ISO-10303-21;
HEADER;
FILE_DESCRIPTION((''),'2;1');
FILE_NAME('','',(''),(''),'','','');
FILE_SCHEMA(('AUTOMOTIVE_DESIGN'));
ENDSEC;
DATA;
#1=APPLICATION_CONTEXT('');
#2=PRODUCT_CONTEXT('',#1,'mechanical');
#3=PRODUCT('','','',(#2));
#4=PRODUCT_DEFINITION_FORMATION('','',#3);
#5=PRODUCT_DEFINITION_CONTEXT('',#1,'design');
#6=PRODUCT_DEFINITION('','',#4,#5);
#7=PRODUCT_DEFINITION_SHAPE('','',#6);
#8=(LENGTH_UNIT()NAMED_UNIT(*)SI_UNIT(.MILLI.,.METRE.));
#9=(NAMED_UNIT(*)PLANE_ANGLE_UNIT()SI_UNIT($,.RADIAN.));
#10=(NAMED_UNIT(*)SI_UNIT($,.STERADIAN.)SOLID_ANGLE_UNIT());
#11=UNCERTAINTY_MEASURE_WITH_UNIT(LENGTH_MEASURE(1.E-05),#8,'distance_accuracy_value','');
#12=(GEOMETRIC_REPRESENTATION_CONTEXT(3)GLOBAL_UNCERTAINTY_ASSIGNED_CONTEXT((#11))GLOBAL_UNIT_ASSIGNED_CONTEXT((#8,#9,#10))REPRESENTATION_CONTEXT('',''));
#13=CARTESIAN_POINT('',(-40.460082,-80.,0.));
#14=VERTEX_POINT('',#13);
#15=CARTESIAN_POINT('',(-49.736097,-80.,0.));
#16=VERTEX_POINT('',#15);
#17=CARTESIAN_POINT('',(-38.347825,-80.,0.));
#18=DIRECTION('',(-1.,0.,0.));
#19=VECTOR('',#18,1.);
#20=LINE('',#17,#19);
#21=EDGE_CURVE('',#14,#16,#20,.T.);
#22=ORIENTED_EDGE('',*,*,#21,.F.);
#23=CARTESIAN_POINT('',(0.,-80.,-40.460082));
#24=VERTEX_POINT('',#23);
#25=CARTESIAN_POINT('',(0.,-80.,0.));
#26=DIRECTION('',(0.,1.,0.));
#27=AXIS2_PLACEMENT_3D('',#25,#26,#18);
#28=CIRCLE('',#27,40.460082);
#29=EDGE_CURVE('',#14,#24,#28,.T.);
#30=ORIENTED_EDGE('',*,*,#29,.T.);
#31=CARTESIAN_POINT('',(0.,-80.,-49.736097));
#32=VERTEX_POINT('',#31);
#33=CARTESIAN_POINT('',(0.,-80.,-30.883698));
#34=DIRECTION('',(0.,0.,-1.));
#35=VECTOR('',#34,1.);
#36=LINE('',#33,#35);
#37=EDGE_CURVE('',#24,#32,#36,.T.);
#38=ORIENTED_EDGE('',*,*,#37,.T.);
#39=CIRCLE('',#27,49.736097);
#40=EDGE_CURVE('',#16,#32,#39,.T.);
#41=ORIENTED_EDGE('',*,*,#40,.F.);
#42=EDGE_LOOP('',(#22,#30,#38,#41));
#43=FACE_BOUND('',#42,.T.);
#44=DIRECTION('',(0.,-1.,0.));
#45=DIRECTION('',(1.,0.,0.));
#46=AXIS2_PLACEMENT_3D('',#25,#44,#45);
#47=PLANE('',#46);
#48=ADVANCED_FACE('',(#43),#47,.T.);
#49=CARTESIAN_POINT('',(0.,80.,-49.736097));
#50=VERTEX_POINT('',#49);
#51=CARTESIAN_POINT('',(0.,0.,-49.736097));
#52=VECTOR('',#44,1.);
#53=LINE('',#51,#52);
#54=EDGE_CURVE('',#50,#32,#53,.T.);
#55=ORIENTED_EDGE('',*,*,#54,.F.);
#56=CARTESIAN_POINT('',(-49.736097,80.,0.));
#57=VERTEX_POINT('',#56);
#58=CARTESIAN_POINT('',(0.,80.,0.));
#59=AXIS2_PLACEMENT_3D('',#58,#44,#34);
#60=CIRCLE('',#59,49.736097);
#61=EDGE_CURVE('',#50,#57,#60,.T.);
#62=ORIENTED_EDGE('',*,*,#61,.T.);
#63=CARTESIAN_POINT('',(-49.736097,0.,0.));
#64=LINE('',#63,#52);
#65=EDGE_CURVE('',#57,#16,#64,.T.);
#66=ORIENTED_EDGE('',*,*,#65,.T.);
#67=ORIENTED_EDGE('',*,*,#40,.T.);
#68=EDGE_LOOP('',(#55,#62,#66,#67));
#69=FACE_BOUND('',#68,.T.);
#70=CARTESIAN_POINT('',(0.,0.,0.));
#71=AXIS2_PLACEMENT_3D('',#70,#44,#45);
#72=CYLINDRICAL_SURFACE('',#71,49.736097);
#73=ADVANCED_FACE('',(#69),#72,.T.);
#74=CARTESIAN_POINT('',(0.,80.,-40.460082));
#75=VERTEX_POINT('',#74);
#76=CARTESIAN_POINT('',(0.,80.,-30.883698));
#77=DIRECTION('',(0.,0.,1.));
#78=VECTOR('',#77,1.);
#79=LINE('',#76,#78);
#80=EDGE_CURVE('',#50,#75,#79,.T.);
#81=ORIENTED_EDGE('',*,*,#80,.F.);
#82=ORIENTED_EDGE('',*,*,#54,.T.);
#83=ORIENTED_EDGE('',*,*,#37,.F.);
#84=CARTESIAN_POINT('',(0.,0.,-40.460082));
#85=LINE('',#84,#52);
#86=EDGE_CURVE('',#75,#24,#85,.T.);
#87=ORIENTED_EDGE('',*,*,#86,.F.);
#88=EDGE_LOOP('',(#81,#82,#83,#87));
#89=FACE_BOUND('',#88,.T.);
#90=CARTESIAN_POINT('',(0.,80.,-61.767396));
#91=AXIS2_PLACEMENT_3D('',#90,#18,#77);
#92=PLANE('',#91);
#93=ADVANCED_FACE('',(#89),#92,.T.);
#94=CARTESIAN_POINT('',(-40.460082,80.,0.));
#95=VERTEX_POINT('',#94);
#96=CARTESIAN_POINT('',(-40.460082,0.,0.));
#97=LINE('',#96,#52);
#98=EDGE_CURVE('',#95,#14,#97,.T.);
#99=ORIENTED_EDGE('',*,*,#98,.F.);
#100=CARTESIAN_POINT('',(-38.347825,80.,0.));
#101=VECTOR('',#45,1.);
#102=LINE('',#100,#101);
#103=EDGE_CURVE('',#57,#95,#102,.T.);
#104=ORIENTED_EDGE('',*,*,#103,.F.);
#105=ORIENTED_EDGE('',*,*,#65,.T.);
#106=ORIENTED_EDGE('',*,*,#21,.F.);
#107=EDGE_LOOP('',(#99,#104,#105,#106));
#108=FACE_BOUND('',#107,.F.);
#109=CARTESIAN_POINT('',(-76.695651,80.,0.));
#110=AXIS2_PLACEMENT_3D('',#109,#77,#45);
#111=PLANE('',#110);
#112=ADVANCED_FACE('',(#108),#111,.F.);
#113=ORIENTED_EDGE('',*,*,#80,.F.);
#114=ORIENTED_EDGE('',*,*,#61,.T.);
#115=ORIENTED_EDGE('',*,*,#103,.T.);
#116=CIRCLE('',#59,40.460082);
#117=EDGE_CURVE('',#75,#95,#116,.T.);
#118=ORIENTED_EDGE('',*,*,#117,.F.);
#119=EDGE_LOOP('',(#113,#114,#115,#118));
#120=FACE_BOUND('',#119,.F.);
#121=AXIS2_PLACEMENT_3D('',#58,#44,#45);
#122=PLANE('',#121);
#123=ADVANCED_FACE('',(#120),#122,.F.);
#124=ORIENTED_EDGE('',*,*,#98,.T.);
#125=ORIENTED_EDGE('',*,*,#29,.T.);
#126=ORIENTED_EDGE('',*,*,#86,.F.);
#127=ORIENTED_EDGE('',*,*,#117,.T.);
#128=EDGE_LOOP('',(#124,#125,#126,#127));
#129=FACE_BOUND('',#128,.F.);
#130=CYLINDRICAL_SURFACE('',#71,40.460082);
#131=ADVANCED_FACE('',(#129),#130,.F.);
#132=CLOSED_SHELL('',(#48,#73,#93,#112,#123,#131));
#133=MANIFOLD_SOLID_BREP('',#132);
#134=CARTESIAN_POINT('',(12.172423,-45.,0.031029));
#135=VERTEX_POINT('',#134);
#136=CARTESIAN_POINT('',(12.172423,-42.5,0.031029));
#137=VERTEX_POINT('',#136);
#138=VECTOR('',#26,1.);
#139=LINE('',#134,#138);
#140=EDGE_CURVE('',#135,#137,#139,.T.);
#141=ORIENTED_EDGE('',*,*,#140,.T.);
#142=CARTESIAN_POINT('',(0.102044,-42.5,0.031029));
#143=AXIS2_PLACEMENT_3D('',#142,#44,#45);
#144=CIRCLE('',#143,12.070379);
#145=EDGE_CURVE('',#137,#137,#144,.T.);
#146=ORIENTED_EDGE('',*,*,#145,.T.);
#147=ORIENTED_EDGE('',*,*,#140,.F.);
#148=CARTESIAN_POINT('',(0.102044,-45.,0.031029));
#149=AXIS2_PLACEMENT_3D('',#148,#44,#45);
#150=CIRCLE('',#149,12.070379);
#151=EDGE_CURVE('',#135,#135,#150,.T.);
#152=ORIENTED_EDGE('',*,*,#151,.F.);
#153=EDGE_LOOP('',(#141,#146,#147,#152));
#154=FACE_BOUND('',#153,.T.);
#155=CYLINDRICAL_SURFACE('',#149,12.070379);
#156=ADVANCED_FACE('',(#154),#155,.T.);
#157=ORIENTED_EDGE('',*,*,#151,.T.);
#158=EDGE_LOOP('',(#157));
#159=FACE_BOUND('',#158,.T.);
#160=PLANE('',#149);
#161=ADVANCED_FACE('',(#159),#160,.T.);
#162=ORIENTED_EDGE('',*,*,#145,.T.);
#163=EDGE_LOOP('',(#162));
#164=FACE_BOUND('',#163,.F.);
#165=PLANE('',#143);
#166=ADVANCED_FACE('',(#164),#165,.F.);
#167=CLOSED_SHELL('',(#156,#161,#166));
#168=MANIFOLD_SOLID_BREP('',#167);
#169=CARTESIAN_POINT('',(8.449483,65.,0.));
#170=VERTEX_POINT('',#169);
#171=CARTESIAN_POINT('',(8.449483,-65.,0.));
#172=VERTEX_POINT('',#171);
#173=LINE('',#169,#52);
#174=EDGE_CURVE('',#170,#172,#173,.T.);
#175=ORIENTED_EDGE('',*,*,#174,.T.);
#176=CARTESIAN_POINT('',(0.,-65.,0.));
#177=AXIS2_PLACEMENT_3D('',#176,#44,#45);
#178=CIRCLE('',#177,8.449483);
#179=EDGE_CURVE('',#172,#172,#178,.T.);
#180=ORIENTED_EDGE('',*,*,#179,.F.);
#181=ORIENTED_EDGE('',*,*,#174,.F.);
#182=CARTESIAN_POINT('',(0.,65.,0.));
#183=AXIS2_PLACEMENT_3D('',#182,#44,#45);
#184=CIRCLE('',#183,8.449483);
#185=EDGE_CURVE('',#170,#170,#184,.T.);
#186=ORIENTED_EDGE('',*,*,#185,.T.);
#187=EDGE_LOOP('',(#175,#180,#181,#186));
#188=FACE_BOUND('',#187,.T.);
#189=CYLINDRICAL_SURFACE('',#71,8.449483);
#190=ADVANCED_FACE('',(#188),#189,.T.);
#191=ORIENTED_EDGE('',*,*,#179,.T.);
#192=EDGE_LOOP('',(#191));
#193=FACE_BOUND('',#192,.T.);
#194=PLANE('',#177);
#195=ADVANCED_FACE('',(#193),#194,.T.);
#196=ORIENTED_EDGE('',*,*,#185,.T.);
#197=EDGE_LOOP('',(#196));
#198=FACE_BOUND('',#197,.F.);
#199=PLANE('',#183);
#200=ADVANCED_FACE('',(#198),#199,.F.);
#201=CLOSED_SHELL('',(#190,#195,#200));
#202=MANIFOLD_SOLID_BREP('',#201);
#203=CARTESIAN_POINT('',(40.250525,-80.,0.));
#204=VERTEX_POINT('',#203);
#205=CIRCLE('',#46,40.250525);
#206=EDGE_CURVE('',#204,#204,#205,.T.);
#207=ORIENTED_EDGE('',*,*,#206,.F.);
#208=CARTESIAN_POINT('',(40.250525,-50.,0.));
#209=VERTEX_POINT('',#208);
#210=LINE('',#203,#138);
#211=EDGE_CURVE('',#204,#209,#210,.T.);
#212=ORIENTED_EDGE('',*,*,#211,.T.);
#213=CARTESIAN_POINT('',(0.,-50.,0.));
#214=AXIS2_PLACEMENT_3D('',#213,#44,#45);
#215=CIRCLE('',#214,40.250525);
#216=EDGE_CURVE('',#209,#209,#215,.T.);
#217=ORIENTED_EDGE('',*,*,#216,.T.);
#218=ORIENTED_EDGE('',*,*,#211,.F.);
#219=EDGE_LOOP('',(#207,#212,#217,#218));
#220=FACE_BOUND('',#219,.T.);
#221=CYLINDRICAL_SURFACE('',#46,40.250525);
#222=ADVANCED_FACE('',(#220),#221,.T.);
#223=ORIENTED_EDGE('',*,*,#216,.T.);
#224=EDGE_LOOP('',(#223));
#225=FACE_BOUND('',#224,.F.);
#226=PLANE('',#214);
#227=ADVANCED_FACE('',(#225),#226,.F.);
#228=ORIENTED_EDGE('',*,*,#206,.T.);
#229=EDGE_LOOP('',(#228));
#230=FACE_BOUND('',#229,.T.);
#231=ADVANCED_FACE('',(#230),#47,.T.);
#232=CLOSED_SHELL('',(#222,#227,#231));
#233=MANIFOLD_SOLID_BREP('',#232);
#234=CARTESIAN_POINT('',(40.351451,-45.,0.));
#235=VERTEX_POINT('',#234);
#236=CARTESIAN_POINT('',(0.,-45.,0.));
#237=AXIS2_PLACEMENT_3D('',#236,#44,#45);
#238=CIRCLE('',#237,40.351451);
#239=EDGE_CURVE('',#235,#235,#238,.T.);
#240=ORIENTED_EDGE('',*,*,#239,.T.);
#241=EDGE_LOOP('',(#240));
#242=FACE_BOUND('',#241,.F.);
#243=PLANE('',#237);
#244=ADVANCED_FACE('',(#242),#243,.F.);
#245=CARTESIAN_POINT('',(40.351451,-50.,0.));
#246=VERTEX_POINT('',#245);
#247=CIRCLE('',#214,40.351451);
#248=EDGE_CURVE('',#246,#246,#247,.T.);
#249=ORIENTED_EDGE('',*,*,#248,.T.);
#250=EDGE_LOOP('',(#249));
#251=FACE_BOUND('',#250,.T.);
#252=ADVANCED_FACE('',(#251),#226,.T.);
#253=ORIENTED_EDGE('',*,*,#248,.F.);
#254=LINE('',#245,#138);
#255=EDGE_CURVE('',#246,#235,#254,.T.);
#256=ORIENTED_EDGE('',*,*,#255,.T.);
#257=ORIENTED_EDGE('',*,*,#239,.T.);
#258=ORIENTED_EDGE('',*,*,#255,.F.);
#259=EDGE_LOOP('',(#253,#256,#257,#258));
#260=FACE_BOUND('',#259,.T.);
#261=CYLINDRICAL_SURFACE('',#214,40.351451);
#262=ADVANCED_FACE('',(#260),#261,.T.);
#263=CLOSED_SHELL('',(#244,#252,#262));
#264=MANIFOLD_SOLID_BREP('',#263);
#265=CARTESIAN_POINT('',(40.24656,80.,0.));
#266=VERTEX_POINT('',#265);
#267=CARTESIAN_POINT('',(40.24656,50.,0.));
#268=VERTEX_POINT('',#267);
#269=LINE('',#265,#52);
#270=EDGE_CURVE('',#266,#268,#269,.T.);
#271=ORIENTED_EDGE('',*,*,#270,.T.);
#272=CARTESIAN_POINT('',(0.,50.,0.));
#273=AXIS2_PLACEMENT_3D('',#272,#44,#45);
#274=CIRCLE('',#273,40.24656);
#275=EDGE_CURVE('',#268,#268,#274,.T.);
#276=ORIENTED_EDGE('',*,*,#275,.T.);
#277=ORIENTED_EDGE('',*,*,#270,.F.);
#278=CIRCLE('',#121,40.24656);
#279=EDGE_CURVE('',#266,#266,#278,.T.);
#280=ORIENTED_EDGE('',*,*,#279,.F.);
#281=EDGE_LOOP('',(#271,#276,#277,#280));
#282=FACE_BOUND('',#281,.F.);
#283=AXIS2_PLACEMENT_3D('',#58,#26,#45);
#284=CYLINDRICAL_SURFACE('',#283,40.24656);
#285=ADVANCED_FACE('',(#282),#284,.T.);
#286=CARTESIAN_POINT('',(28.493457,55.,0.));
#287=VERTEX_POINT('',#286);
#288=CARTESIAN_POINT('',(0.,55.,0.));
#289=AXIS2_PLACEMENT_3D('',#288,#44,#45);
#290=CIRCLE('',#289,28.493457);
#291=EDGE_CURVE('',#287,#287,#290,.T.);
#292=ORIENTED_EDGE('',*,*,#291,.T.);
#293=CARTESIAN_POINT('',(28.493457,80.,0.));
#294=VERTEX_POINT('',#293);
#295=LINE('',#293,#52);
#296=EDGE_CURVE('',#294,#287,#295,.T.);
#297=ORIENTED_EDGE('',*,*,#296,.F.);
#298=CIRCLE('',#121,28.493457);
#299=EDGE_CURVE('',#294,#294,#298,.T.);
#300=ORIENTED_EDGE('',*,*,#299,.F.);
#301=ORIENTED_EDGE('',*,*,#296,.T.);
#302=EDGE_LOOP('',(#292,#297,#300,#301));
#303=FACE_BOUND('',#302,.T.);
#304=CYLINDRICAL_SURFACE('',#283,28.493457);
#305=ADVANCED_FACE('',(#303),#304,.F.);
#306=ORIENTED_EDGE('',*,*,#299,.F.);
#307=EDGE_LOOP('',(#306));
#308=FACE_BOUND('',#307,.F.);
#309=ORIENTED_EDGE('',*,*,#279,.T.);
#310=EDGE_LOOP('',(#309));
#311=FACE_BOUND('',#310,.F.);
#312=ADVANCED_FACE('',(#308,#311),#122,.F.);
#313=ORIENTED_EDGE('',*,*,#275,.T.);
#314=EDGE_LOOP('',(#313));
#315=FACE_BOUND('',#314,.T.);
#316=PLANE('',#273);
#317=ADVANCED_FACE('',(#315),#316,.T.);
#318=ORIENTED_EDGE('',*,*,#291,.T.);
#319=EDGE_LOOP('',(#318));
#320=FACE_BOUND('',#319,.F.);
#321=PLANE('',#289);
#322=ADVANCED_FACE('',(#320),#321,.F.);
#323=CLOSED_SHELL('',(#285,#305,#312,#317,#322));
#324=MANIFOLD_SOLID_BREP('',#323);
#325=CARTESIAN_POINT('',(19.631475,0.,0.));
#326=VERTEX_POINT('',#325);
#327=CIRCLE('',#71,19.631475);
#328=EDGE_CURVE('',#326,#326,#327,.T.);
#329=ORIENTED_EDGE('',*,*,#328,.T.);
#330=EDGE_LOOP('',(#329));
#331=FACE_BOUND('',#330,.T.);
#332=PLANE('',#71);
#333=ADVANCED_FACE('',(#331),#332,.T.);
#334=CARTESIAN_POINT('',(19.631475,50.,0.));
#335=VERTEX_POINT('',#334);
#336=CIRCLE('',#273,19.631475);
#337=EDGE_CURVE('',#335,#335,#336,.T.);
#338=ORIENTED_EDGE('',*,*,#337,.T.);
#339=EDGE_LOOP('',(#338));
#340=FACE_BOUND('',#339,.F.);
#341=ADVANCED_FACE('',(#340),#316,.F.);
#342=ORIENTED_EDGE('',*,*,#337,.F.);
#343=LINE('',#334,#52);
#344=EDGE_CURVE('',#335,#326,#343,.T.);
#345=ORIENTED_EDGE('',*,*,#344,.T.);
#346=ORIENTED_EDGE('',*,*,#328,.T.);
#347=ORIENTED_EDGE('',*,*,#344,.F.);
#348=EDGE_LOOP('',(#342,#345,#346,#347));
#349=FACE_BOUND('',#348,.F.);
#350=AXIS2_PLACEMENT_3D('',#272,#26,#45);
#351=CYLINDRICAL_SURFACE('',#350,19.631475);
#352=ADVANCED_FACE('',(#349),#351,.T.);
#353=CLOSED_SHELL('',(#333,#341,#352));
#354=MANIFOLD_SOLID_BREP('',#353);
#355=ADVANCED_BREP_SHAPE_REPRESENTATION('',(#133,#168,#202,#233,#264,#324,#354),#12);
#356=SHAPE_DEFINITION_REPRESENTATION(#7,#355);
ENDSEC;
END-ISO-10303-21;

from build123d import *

# Parameters (mm, degrees)
F0_R      = 49.7360969104
F1_DEPTH  = 80
F2_R      = 40.4600824773
F3_DEPTH  = 90
F4_R      = 8.4494830611
F5_DEPTH  = 65
F7_R      = 40.2505245535
F8_DEPTH  = 30
F10_R     = 40.3514508638
F11_DEPTH = 5
F13_R     = 40.2465604933
F14_DEPTH = 30
F16_R     = 19.6314751685
F17_DEPTH = 50
F18_R     = 28.4934569002
F19_DEPTH = 25
F20_W     = 76.695650816
F20_H     = 61.7673955858
F21_DEPTH = 180
F23_R     = 12.0703792792
F24_DEPTH = 2.5


with BuildPart() as f1:
    # F0 (on Front) → F1 (new body, symmetric)
    with BuildSketch(Plane.XZ):
        Circle(F0_R)
    extrude(amount=F1_DEPTH, both=True)

    # F2 (on Front) → F3 (cut, symmetric)
    with BuildSketch(Plane.XZ):
        Circle(F2_R)
    extrude(amount=F3_DEPTH, both=True, mode=Mode.SUBTRACT)

    # F20 (on offset) → F21 (cut)
    with BuildSketch(Plane.XZ.offset(-80)):
        with Locations((-38.347825408, -30.8836977929)):
            Rectangle(F20_W, F20_H)
    extrude(amount=F21_DEPTH, mode=Mode.SUBTRACT)


with BuildPart() as f5:
    # F4 (on Front) → F5 (new body, symmetric)
    with BuildSketch(Plane.XZ):
        Circle(F4_R)
    extrude(amount=F5_DEPTH, both=True)


with BuildPart() as f8:
    # F7 (on offset) → F8 (new body)
    with BuildSketch(Plane.XZ.offset(80)):
        Circle(F7_R)
    extrude(amount=-F8_DEPTH)


with BuildPart() as f11:
    # F10 (on offset) → F11 (new body)
    with BuildSketch(Plane.XZ.offset(50)):
        Circle(F10_R)
    extrude(amount=-F11_DEPTH)


with BuildPart() as f14:
    # F13 (on offset) → F14 (new body)
    with BuildSketch(Plane.XZ.offset(-80)):
        Circle(F13_R)
    extrude(amount=F14_DEPTH)

    # F18 (on offset) → F19 (cut)
    with BuildSketch(Plane.XZ.offset(-80)):
        Circle(F18_R)
    extrude(amount=F19_DEPTH, mode=Mode.SUBTRACT)


with BuildPart() as f17:
    # F16 (on offset) → F17 (new body)
    with BuildSketch(Plane.XZ.offset(-50)):
        Circle(F16_R)
    extrude(amount=F17_DEPTH)


with BuildPart() as f24:
    # F23 (on offset) → F24 (new body)
    with BuildSketch(Plane.XZ.offset(45)):
        with Locations((0.1020442141, 0.0310293544)):
            Circle(F23_R)
    extrude(amount=-F24_DEPTH)


solid = Compound([f1.part, f5.part, f8.part, f11.part, f14.part, f17.part, f24.part])
